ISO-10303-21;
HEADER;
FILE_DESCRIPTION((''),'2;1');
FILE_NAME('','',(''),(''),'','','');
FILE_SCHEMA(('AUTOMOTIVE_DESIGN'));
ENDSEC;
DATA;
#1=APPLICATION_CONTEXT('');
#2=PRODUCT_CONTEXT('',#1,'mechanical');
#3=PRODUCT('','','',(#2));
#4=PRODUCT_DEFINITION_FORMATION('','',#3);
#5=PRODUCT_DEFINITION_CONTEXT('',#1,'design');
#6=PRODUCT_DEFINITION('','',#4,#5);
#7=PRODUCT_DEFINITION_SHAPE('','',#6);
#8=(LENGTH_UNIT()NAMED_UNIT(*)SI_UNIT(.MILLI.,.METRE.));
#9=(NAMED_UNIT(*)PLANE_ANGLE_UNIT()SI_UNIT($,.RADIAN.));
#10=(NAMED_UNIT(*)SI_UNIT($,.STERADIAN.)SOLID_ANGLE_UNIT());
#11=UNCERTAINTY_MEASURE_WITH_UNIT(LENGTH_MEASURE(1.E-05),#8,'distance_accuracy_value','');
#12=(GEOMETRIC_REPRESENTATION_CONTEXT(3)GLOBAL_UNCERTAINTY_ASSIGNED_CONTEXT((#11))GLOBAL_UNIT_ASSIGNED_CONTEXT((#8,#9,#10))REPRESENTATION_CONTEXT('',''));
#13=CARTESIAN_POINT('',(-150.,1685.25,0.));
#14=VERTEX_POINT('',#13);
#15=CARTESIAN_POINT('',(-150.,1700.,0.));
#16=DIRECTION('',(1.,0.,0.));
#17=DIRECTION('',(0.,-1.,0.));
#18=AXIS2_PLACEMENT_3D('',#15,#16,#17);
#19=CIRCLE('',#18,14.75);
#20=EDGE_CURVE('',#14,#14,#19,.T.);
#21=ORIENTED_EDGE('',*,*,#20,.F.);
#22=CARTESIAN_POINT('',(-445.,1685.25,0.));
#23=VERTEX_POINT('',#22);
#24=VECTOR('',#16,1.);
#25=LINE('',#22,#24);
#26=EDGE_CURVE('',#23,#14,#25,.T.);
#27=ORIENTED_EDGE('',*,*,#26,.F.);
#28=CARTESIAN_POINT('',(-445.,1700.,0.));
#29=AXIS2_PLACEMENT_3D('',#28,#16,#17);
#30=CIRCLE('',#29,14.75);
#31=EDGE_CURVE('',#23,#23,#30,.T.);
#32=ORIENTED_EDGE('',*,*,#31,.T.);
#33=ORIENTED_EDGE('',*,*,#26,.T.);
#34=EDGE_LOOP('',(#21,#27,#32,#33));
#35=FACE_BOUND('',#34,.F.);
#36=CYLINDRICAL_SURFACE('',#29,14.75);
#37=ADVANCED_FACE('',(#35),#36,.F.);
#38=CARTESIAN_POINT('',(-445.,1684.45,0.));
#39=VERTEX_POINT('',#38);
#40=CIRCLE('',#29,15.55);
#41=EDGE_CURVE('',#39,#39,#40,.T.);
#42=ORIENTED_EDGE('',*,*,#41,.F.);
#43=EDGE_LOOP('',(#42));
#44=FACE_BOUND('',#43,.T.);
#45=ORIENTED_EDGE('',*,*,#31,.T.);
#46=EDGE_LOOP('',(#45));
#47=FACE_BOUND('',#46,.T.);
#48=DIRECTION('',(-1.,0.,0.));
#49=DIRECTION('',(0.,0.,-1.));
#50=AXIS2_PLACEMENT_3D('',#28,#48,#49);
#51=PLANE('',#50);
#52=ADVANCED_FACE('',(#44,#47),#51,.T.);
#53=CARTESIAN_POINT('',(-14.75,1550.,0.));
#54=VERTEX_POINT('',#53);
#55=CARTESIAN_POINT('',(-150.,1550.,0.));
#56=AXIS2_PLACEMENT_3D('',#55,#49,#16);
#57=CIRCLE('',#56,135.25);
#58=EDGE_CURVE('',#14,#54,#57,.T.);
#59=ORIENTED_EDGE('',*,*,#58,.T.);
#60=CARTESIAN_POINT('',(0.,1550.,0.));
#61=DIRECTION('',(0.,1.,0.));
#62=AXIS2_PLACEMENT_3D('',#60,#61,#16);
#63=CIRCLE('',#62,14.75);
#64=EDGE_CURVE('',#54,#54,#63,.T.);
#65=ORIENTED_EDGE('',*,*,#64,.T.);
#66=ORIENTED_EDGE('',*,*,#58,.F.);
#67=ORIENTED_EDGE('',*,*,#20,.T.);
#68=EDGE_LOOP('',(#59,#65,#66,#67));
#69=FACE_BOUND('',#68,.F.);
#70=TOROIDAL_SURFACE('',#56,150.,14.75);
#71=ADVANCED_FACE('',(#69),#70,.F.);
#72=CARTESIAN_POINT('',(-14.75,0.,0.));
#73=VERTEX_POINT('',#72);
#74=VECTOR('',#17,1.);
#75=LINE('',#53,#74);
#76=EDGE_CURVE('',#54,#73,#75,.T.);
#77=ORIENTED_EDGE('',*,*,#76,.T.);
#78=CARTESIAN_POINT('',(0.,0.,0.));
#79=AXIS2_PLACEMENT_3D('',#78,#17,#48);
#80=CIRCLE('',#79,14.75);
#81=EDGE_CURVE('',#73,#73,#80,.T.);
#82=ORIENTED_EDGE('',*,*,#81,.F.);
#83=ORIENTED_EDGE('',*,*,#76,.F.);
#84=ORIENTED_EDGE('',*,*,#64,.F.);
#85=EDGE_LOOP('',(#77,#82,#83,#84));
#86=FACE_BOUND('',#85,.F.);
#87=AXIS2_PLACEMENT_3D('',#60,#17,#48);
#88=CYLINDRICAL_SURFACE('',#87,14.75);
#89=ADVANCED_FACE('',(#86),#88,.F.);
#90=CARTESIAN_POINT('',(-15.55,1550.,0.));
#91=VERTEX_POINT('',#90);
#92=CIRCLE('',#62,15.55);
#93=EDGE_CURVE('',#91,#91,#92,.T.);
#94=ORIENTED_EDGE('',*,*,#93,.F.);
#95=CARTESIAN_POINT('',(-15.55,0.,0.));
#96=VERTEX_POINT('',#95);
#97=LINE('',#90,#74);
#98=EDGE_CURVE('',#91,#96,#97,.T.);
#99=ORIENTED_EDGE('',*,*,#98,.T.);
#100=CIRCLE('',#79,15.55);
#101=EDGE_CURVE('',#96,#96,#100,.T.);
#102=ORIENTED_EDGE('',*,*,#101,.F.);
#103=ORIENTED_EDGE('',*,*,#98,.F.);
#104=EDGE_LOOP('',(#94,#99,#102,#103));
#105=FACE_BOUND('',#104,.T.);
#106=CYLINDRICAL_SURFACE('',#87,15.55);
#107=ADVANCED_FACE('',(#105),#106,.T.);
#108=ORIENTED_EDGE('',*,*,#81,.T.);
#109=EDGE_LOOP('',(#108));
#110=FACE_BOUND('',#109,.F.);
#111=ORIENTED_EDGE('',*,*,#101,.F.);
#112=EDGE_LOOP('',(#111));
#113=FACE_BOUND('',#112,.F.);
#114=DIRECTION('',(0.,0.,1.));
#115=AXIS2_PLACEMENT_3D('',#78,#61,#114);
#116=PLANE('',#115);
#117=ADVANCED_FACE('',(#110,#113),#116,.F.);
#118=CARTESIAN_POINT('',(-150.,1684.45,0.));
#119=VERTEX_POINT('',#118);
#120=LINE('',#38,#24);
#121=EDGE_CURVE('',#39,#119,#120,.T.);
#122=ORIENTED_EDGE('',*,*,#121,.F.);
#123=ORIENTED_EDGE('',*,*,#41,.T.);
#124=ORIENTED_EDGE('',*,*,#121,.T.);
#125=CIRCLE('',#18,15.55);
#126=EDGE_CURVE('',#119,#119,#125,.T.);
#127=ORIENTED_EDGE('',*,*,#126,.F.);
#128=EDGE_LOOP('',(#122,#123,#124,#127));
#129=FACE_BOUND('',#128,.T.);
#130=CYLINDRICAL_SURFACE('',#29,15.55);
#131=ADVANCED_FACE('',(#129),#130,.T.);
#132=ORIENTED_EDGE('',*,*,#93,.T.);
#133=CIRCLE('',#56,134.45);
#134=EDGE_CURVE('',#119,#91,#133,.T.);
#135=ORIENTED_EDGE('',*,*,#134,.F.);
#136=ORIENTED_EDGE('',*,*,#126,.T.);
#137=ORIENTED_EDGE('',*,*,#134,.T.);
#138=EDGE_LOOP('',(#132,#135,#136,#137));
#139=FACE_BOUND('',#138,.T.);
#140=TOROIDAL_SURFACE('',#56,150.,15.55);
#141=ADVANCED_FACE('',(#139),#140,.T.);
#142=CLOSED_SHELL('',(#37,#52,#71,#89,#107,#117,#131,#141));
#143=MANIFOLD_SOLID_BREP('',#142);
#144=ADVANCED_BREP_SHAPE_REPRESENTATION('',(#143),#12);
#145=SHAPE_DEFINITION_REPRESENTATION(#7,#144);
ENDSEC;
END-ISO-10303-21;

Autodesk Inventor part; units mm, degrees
ref_plane "YZ Plane" through (0, 0, 0) normal (1, 0, 0) x (0, 1, 0)
ref_plane "XZ Plane" through (0, 0, 0) normal (0, 1, 0) x (-1, 0, 0)
ref_plane "XY Plane" through (0, 0, 0) normal (0, 0, 1) x (1, 0, 0)
sketch "Sketch1" plane through (0, 0, 0) normal (0, 1, 0) x (-1, 0, 0)
  circle A0 centre (0, 0) radius 15.55
  circle A1 centre (0, 0) radius 14.75
  dimension "d0" = 31.1
  dimension "d1" = 29.5
sketch "Sketch2" plane through (0, 0, 0) normal (0, 0, 1) x (1, 0, 0)
  line L0 (-445, 1700) -> (-150, 1700)
  line L1 (0, 1550) -> (0, 0)
  arc A0 (0, 1550) -> (-150, 1700) centre (-150, 1550) ccw
  point P0 (0, 1700)
  dimension "d4" = 445
  dimension "d6" = 150
  dimension "d9" = 1700
sweep "Sweep1" add profiles "Sketch1" path "Sketch2"
properties part number "SP13V1 Tubo Baranda" material "Acero, carbono"
